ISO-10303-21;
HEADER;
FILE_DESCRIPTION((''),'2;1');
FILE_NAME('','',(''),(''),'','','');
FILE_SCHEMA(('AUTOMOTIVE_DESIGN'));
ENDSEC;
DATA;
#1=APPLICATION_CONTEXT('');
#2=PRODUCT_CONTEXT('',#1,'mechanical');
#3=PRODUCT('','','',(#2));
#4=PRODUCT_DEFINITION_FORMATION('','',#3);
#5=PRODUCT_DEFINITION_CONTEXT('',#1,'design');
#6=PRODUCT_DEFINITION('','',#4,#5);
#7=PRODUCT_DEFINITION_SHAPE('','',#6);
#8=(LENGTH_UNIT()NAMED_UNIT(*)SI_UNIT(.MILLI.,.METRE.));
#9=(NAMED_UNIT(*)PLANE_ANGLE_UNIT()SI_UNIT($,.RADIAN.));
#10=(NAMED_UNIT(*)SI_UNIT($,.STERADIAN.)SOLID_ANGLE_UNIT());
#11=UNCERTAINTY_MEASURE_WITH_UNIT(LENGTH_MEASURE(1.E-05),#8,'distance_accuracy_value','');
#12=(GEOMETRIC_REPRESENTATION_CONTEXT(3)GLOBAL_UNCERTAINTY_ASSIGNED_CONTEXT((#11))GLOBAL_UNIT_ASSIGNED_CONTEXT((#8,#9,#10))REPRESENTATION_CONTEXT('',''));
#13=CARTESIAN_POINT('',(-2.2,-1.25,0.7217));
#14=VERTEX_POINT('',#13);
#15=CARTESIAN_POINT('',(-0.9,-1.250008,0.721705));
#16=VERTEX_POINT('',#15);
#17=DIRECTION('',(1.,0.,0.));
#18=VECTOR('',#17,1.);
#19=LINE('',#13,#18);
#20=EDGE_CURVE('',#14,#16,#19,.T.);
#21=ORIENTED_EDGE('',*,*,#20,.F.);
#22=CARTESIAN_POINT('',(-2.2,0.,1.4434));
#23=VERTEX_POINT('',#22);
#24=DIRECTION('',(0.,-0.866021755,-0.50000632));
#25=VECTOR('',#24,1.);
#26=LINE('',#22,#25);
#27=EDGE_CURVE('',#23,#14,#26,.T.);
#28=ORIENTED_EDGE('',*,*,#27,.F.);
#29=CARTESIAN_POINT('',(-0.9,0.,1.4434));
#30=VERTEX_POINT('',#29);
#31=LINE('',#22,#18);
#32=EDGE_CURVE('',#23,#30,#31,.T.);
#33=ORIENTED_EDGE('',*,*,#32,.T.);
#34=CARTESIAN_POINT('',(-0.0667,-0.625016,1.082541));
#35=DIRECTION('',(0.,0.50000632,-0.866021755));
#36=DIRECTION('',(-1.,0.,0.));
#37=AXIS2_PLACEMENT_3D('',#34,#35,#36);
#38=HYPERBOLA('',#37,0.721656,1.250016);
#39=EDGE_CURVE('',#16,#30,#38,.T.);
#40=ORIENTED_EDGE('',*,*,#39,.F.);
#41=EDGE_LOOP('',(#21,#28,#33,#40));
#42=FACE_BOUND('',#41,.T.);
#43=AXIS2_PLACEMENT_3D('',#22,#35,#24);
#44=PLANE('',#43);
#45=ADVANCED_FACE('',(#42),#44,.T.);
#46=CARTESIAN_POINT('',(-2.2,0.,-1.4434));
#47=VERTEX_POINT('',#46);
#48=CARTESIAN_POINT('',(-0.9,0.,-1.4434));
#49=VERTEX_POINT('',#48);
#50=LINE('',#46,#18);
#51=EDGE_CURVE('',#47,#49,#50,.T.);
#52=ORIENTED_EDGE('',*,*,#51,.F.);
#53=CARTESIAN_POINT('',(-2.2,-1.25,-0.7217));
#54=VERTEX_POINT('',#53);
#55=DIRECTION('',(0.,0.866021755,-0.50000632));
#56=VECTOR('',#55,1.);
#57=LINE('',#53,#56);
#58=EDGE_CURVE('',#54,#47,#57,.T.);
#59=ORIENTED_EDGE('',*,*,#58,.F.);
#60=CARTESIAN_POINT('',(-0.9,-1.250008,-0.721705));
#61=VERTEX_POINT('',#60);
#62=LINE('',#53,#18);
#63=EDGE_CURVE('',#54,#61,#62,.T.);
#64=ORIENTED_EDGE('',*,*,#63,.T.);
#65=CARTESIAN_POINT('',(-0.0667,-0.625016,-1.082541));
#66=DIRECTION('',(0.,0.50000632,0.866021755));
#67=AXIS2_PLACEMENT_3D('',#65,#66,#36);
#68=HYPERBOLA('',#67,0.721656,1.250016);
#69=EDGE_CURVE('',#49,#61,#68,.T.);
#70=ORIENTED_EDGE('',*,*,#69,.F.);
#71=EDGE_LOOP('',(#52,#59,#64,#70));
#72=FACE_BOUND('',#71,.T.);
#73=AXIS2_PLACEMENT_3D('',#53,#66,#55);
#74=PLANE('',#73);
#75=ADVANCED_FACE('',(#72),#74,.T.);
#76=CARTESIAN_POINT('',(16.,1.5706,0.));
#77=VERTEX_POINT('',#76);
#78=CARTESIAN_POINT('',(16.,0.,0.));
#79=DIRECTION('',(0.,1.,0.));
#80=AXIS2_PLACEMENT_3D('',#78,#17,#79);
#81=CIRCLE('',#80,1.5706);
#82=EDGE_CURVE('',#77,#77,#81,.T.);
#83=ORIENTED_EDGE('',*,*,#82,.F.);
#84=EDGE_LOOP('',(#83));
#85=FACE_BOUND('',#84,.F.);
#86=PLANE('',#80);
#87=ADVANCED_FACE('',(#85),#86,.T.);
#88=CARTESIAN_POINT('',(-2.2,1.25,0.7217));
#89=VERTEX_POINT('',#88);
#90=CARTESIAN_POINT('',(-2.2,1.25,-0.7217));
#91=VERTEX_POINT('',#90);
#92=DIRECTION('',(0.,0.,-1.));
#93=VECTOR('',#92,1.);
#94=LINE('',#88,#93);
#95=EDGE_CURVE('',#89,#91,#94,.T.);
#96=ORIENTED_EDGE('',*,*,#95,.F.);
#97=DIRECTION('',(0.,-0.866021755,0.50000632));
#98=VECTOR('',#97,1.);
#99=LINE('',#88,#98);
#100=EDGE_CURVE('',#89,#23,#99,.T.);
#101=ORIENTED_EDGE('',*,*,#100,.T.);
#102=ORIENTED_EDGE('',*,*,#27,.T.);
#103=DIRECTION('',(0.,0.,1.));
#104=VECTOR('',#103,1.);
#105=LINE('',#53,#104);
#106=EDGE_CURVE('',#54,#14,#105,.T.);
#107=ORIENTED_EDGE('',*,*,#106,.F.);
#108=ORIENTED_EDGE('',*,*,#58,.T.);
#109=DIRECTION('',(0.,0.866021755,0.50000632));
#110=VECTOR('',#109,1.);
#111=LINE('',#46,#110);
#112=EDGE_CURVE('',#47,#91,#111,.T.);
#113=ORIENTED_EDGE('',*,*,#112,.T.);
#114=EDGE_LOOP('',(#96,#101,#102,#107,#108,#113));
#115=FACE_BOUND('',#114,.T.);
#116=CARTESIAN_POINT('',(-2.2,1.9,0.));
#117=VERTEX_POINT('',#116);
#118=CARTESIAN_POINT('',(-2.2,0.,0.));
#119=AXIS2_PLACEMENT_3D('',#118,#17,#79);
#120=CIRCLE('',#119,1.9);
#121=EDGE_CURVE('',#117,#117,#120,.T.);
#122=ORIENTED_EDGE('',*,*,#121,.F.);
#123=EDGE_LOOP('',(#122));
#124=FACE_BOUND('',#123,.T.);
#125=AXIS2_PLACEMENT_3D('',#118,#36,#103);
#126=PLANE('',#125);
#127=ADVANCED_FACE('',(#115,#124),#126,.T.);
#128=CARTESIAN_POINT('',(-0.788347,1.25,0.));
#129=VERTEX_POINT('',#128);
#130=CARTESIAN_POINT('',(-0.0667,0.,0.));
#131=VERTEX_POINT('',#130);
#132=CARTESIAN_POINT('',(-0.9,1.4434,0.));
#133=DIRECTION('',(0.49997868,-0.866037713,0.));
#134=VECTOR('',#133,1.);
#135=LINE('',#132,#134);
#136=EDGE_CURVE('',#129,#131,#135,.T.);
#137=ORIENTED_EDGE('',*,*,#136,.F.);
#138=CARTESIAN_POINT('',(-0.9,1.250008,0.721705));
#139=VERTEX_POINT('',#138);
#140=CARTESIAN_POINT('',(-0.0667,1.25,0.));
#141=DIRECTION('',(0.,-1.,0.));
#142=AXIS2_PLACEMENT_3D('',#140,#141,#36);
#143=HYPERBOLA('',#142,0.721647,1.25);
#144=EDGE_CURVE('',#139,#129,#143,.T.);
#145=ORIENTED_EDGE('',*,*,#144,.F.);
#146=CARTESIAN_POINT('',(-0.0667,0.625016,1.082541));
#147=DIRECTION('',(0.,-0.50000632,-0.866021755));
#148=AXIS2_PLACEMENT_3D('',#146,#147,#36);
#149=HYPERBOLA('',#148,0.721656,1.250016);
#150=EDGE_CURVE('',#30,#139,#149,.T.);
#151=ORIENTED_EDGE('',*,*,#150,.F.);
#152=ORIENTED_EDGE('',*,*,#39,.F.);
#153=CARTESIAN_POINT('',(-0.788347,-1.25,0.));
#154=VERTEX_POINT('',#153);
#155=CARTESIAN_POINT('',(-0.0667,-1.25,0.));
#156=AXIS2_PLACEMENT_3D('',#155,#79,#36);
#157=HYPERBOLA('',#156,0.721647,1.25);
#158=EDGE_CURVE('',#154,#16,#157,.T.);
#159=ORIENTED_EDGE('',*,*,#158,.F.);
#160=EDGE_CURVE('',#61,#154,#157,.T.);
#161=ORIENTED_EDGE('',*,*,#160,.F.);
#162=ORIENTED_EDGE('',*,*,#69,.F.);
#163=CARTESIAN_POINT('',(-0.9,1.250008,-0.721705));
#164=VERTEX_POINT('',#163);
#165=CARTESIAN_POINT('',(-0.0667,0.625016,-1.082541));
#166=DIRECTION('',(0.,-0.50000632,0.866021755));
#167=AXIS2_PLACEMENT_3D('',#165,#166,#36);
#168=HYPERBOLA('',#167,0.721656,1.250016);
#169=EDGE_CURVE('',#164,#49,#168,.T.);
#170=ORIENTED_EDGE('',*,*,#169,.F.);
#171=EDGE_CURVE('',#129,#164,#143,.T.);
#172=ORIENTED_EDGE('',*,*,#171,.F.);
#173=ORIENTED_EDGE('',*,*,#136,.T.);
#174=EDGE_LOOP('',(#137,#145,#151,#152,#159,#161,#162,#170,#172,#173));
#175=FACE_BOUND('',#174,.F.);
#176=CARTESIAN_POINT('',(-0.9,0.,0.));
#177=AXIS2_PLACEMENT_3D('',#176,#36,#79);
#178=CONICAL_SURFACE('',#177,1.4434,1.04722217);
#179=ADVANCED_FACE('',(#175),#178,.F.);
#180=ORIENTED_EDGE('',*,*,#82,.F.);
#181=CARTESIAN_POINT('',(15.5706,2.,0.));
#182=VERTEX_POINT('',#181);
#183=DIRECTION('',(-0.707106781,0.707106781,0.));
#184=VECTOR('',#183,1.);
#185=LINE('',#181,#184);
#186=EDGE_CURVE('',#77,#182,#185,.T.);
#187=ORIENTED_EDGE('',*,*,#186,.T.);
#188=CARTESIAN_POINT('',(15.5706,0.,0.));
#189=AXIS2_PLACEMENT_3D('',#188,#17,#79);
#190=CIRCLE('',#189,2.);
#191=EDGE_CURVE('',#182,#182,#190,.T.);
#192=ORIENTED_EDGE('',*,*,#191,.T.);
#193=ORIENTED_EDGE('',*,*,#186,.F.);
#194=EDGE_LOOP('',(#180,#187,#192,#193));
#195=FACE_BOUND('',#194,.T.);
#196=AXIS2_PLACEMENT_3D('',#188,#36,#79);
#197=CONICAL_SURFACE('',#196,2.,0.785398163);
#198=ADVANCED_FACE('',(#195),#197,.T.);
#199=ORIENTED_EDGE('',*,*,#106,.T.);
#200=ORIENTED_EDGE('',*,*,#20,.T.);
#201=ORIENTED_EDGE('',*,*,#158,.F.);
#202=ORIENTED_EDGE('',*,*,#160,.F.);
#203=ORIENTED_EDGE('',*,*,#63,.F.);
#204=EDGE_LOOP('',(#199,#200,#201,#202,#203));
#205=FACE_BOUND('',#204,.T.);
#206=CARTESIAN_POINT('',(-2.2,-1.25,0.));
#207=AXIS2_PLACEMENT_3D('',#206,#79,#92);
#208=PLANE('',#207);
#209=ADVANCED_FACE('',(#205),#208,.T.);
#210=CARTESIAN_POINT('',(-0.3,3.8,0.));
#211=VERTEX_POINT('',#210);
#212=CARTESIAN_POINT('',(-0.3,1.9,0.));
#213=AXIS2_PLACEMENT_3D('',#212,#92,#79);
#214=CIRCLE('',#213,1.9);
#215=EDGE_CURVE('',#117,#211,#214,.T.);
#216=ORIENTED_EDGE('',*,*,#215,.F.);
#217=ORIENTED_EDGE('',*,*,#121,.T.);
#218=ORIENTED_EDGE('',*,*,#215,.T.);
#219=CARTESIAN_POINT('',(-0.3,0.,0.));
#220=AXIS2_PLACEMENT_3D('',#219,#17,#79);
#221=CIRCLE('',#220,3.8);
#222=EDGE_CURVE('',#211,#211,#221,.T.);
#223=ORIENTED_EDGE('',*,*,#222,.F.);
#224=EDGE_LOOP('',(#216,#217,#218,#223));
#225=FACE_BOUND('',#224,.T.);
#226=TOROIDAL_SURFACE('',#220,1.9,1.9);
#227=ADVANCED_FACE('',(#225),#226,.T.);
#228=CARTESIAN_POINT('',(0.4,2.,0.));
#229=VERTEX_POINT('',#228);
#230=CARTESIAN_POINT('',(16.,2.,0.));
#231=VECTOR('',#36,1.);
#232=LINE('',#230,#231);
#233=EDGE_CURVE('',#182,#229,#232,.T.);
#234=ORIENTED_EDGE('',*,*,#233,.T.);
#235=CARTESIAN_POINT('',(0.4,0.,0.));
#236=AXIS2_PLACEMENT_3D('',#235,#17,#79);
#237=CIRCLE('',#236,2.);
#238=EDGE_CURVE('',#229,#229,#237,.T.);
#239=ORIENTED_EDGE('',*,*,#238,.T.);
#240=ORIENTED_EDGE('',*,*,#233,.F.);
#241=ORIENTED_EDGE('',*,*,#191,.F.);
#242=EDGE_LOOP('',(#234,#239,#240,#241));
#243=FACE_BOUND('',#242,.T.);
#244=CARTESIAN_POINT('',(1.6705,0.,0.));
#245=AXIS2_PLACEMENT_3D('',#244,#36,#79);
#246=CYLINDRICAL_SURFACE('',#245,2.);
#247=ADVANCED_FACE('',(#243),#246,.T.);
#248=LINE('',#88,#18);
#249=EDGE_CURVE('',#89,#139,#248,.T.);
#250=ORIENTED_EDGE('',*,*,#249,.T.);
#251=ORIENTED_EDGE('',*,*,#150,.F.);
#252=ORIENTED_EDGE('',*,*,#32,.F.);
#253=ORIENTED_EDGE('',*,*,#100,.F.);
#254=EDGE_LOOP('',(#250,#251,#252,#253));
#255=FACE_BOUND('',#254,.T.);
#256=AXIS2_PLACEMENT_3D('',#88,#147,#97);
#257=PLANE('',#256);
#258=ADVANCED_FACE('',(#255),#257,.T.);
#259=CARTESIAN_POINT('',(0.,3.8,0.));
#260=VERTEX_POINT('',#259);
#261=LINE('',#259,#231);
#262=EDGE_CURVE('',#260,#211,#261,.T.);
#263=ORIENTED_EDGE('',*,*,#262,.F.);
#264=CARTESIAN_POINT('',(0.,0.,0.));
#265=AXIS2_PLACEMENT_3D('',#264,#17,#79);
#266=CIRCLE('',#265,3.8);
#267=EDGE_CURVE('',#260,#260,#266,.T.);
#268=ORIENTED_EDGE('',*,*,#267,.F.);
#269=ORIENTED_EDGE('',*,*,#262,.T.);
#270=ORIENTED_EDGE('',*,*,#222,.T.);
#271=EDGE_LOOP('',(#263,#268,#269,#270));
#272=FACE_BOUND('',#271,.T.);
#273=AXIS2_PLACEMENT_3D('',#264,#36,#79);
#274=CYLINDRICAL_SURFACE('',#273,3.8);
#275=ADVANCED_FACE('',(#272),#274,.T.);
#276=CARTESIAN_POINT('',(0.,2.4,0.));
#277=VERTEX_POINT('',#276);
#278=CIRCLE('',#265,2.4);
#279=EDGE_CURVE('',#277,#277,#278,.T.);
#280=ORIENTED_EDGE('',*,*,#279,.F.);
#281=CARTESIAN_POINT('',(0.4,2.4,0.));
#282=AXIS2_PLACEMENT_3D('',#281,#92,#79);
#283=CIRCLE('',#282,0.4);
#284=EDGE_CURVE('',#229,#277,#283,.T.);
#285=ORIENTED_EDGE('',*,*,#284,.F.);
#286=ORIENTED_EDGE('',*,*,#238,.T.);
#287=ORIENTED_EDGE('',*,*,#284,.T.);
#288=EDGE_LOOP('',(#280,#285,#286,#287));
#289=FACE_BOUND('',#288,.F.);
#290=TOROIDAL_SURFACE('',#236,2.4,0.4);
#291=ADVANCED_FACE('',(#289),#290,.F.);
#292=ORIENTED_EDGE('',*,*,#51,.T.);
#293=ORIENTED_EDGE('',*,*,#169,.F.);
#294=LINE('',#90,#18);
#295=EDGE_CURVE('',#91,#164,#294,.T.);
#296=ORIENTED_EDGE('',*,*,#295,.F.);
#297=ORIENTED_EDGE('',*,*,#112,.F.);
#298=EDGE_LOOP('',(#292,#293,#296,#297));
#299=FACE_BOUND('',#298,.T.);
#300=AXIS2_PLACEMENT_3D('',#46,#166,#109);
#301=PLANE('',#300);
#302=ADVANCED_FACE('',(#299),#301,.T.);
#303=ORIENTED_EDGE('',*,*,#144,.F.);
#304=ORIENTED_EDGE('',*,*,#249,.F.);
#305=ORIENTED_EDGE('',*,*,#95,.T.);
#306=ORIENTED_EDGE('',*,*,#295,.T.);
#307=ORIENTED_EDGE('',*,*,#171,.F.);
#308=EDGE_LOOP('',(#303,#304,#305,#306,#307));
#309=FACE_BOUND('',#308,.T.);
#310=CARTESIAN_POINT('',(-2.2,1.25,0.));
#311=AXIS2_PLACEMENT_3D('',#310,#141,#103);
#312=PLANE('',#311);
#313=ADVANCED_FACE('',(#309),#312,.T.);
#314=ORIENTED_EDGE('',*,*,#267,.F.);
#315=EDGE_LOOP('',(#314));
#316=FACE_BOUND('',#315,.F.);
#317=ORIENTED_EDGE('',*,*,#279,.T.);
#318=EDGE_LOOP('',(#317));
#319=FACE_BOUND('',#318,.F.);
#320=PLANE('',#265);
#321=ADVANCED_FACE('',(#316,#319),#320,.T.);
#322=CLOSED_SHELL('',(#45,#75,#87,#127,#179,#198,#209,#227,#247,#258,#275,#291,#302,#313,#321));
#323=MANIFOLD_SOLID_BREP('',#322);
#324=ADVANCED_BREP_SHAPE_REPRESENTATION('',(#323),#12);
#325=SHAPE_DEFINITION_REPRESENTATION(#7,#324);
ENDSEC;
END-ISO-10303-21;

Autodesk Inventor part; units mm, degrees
ref_plane "YZ Plane" through (0, 0, 0) normal (1, 0, 0) x (0, 1, 0)
ref_plane "XZ Plane" through (0, 0, 0) normal (0, 1, 0) x (-1, 0, 0)
sketch "Sketch1" plane through (0, 0, 0) normal (0, 0, 1) x (1, 0, 0)
  line L0 (-0.0667, 0) -> (16, 0)
  line L1 (16, 0) -> (16, 2)
  line L2 (16, 2) -> (2.1, 2)
  line L3 (2.1, 2) -> (1.6705, 2)
  line L4 (1.6705, 2) -> (0, 2)
  line L5 (0, 2) -> (0, 3.8)
  line L6 (0, 3.8) -> (-2.2, 3.8)
  line L7 (-2.2, 3.8) -> (-2.2, 1.4434)
  line L8 (-2.2, 1.4434) -> (-0.9, 1.4434)
  line L9 (-0.9, 1.4434) -> (-0.0667, 0)
  line L10 (-5.84, 0) -> (19.64, 0) projected
  line L11 (0, -0.76) -> (0, 4.56) projected
  line L12 (2.1, 2) -> (0, 2) construction
  dimension "d1" = 13.9
  dimension "d2" = 0.4295
  dimension "d3" = 2.2
  dimension "d4" = 1.3
  dimension "d5" = 60
  dimension "d6" = 4
  dimension "d7" = 4
  dimension "d8" = 2.8868
  dimension "d9" = 7.6
  dimension "d26" = 16
revolve "Body" add sketch "Sketch1" angle 360 about axis through (-0.0667, 0, 0) along (1, 0, 0)
sketch "Sketch2" plane through (-2.2, 0, 0) normal (-1, 0, 0) x (0, 0, 1)
  circle A0 centre (0, 0) radius 1.4434 projected
  line L0 (0, -5.32) -> (0, 5.32) projected
  line L1 (-5.32, 0) -> (5.32, 0) projected
  line L2 (1.4434, 0) -> (0.7217, -1.25)
  line L3 (0.7217, -1.25) -> (-0.7217, -1.25)
  line L4 (-0.7217, -1.25) -> (-1.4434, 0)
  line L5 (-1.4434, 0) -> (-0.7217, 1.25)
  line L6 (-0.7217, 1.25) -> (0.7217, 1.25)
  line L7 (0.7217, 1.25) -> (1.4434, 0)
  point P0 (0, 0)
extrude "Slot" add sketch "Sketch2" against normal up to next contours L7 A0 | A0 L2 | L6 L0 A0 | A0 L0 L3 | L0 L6 A0 | A0 L3 L0 | L4 A0 | A0 L5
fillet "Fillet1" radius 1.9 1 edges at (-2.2, -3.8, 0)
thread "Thread" size "M4x0.7" class "6g" standard "ISO Metric profile" length 13.9
chamfer "Chamfer1" distance 0.4294 distance2 0.4294 1 edges at (16, -2, 0) measured on face at (16, 0.527, -0.2661)
ref_plane "Work Plane1" through (29, 0, 0) normal (0, -1, 0) x (1, 0, 0)
fillet "Fillet2" radius 0.4 1 edges at (0, -2, 0)
equation "\"d30\" = R"
equation "\"d17\" = RR"
equation "\"d13\" = GEL"
equation "\"d15\" = -0.5 * SPD + 0.5 * GD"
equation "\"d16\" = GUL"
equation "\"d1\" = GEL"
equation "\"d3\" = KOH"
equation "\"d4\" = INTI"
equation "\"d6\" = GD"
equation "\"d7\" = BDM"
equation "\"d8\" = 1.1547 * SW"
equation "\"d9\" = KOD"
equation "\"d26\" = NLG"
equation "\"GD\" = NND"
equation "\"NLG\" = 16"
equation "\"GEL\" = 13.9"
equation "\"KOD\" = 7.6"
equation "\"KOH\" = 2.2"
equation "\"INTI\" = 1.3"
equation "\"GAL\" = 0.61345 * PTC"
equation "\"GUL\" = 0.61345 * PTC"
equation "\"BDM\" = NND"
equation "\"SW\" = 2.5"
equation "\"RR\" = 1.9"
equation "\"SPD\" = NND - 1.2269 * PTC"
equation "\"R\" = 0.4"
equation "\"TOA\" = 30deg"
equation "\"GD1\" = THREADDIA - 1.2269 * PTC"
equation "\"THREADDIA\" = 4"
equation "\"PTC\" = 0.7"
equation "\"NND\" = 4"
equation "\"KOH1\" = 0.3"
equation "\"E0\" = 2.873"
properties part number "ISO 7380-1 - M4 x 16" material "Steel"
